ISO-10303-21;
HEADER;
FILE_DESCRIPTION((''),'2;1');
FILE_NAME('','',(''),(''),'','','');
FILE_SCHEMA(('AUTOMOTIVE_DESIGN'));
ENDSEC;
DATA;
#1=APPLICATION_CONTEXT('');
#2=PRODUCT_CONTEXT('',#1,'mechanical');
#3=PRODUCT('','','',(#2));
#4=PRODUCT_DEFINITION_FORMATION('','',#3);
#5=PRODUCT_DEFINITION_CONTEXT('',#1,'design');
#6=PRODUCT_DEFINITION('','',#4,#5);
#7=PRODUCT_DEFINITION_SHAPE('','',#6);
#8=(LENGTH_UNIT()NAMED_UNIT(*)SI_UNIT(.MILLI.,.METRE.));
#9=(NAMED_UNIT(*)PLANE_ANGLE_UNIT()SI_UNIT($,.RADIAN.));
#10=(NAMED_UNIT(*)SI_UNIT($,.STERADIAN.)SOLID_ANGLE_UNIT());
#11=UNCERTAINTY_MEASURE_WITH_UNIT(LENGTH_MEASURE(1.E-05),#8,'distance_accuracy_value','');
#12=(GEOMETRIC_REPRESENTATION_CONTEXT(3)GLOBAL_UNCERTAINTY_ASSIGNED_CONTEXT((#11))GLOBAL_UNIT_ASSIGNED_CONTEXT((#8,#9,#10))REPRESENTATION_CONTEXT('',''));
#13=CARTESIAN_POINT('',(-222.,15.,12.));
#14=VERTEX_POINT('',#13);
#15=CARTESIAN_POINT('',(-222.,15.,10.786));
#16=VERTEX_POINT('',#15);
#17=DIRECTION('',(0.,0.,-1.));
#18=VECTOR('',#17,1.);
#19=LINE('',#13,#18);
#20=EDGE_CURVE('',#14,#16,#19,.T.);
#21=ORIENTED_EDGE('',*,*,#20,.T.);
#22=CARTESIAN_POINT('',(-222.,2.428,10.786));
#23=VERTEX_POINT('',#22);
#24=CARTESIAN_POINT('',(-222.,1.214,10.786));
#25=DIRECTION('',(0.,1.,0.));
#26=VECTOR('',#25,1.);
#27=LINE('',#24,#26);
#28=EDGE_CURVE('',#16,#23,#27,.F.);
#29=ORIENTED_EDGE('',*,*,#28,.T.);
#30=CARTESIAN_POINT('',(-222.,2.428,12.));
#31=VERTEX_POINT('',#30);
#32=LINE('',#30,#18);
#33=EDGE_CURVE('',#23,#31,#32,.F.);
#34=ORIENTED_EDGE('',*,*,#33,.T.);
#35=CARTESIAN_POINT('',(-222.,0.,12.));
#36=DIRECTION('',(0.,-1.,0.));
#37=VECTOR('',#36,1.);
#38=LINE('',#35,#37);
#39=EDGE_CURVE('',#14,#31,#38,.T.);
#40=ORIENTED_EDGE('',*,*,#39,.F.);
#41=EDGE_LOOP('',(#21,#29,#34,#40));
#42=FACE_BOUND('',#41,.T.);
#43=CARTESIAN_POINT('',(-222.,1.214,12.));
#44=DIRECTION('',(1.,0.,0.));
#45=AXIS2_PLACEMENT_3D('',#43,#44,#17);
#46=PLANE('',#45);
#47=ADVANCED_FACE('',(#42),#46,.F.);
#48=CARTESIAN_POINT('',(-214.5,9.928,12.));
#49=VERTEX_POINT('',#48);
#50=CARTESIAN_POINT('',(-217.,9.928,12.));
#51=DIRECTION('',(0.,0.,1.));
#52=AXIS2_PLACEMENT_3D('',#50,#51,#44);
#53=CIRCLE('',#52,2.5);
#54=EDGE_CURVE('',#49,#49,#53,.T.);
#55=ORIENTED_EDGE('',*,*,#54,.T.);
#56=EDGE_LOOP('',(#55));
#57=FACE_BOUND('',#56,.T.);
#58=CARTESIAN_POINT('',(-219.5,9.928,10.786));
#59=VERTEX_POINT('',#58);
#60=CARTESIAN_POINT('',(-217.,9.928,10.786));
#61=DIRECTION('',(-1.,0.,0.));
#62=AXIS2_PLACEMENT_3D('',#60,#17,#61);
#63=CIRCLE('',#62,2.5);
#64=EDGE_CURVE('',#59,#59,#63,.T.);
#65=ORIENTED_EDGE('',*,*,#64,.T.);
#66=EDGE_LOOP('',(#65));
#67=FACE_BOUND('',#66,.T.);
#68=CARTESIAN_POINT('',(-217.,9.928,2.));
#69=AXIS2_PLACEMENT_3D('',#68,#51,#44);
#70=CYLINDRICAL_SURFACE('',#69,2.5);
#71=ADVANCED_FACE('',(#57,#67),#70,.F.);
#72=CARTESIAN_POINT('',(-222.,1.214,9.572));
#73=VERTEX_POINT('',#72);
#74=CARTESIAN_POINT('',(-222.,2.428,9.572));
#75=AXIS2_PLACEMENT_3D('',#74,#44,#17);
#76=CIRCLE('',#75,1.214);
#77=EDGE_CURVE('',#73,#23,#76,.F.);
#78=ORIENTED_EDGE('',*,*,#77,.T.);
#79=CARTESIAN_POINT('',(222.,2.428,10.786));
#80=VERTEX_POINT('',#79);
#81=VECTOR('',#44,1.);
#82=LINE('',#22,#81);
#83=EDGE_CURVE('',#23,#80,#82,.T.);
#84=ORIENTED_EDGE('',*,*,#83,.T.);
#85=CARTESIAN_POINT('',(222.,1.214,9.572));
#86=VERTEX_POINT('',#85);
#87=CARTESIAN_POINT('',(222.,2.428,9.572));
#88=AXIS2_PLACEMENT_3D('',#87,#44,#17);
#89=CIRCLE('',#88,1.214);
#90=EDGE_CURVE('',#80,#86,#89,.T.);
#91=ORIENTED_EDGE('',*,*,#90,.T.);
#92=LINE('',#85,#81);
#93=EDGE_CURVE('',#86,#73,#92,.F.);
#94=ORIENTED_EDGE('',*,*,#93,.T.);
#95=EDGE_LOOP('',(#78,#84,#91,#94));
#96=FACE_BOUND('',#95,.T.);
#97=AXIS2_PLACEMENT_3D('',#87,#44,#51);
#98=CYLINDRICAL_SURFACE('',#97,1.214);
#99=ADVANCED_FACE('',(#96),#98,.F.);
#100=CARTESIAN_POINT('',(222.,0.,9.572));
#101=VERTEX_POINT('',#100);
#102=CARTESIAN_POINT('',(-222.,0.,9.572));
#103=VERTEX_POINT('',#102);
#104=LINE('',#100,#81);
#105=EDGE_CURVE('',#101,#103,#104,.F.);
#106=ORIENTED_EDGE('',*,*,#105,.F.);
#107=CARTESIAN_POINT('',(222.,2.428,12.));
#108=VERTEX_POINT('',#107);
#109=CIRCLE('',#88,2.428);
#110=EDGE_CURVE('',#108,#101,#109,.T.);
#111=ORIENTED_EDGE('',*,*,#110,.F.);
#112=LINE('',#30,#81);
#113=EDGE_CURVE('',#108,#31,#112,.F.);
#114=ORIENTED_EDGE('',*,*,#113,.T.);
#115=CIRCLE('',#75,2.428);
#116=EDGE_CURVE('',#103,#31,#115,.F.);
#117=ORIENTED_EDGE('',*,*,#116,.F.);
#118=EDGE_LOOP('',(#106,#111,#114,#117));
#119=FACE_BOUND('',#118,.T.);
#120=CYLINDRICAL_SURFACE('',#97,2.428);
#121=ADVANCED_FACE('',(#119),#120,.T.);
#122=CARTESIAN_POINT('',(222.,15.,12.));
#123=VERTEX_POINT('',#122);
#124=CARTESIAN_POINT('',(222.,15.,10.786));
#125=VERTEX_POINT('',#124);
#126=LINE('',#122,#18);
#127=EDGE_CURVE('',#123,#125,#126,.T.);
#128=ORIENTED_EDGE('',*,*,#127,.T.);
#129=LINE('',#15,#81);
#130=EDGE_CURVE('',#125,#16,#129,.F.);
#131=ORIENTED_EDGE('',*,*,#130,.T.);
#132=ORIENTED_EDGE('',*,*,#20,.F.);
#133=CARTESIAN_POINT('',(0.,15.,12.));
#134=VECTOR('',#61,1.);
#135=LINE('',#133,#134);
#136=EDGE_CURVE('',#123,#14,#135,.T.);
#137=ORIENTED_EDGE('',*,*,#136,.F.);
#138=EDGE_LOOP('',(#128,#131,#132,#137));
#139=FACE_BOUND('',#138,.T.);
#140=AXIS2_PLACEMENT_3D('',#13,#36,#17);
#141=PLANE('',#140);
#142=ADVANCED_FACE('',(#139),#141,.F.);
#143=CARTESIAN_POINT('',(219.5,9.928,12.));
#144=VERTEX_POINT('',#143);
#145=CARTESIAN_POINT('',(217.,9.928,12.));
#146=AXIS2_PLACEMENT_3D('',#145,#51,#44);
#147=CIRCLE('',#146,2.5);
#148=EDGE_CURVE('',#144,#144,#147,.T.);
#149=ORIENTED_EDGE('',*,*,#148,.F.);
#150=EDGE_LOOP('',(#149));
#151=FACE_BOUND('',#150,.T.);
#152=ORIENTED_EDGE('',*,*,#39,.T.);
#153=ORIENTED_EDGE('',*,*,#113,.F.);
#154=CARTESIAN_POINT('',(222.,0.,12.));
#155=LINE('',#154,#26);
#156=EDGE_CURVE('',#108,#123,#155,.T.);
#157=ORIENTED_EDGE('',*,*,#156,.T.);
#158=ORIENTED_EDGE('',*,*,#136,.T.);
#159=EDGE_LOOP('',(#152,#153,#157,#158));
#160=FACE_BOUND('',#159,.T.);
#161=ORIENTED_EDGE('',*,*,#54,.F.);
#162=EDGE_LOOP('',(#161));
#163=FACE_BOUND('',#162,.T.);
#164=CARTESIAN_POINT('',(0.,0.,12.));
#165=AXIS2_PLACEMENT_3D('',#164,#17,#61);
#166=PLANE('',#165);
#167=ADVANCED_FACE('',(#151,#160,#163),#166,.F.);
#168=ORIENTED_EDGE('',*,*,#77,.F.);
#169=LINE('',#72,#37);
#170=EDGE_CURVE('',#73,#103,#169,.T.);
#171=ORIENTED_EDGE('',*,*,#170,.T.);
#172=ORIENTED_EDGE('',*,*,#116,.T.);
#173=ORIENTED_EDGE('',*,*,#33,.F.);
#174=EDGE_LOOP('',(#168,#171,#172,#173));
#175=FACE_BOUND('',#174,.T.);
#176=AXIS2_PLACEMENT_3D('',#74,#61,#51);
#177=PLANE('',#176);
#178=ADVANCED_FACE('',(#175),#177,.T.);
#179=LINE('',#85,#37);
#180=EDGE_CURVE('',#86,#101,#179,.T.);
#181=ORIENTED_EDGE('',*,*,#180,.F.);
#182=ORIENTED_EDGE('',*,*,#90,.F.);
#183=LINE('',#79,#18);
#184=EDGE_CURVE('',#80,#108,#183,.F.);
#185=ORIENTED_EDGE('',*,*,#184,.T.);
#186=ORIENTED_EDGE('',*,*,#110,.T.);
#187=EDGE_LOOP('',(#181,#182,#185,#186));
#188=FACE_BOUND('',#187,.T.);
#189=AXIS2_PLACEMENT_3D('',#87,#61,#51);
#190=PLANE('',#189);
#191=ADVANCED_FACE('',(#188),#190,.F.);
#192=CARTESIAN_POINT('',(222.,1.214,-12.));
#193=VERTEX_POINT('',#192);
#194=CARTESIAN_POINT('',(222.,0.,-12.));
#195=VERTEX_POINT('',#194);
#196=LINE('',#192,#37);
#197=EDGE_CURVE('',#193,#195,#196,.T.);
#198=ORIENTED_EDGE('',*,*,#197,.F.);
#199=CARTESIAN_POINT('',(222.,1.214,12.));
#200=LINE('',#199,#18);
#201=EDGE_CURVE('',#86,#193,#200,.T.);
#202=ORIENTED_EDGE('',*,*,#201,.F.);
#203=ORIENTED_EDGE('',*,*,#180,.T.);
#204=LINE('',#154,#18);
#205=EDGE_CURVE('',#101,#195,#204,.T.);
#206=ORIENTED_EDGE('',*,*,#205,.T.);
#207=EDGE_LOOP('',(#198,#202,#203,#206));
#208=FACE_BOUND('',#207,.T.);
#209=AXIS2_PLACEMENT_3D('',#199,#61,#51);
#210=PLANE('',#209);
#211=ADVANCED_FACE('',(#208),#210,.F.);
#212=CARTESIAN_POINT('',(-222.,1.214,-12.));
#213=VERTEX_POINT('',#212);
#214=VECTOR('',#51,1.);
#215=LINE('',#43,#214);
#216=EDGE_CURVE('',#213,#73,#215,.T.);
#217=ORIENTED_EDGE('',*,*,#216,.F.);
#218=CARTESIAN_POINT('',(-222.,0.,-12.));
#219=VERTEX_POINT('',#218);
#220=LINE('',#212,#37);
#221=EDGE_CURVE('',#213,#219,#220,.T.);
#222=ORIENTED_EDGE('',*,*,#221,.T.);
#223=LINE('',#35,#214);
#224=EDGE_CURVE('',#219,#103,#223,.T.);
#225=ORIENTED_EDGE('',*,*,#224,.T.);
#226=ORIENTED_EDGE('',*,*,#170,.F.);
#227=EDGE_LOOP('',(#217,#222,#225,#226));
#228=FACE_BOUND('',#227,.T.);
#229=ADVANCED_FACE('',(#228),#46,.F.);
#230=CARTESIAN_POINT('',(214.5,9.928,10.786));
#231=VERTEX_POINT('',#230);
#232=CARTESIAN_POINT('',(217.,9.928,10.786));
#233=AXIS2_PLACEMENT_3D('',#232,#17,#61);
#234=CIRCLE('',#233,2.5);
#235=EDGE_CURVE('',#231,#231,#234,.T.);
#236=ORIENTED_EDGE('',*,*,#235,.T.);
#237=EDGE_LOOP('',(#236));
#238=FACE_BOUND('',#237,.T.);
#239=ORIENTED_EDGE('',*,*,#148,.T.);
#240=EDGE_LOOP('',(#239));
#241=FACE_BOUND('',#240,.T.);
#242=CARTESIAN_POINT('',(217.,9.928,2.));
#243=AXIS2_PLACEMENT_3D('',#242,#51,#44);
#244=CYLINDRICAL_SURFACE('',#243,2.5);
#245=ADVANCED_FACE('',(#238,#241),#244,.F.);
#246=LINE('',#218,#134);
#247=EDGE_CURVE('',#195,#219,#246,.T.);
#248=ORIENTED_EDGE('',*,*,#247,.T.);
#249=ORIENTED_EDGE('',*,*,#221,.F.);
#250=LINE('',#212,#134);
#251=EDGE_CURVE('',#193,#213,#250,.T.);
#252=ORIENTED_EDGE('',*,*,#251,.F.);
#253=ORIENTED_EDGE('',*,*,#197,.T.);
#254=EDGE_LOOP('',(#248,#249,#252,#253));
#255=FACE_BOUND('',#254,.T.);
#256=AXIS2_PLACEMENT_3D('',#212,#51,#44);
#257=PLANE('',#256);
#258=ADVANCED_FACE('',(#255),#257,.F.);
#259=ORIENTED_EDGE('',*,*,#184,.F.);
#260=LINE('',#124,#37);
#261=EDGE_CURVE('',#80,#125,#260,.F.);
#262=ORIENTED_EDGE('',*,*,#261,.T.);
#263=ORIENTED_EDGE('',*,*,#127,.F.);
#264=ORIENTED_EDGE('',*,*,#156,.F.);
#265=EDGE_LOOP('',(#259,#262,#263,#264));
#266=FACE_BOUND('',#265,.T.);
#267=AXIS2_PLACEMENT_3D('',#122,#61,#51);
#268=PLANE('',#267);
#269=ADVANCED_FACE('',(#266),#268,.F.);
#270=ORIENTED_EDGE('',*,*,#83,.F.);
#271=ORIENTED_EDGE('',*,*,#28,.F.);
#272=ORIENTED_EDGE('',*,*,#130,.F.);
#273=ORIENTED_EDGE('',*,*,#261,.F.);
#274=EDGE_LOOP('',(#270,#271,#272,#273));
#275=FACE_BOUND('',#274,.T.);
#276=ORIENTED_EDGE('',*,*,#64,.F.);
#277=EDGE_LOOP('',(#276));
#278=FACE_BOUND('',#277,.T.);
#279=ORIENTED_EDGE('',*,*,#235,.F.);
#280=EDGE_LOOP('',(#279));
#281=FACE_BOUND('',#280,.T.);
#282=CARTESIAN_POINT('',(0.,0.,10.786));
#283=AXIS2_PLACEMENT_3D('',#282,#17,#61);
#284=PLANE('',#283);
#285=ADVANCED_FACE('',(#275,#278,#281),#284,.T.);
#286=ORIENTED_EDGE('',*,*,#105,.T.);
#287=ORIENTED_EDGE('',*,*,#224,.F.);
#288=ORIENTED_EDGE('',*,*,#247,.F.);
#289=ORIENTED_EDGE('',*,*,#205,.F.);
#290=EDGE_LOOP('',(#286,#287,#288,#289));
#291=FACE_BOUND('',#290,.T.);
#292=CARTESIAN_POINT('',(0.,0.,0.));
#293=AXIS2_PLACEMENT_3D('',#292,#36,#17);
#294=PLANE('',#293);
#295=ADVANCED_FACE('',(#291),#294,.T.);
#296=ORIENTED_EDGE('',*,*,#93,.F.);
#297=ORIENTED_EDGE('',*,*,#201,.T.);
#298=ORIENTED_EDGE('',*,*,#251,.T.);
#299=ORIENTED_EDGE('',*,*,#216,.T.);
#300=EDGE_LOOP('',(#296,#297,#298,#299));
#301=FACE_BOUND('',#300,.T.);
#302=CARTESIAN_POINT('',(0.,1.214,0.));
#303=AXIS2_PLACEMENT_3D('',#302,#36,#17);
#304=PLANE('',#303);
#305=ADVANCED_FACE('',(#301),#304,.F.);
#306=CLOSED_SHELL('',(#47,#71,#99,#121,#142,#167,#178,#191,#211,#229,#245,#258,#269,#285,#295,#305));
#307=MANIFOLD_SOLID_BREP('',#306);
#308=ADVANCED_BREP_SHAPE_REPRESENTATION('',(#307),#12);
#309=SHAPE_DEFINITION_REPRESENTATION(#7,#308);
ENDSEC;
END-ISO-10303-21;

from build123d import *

# Parameters (mm, degrees)
SKETCH1_W                    = 444
SKETCH1_H                    = 24
BASE_FLANGE1_DEPTH           = 1.214
EDGE_FLANGE1_STRIP_W         = 7.284
EDGE_FLANGE1_STRIP_H         = 1.214
EDGE_FLANGE1_STRIP_CUT_DEPTH = 444
EDGE_FLANGE1_DEPTH           = 444
SKETCH9_R                    = 2.5
CUT_EXTRUDE1_DEPTH           = 10


# Sheet-metal steps are written as plain solids
with BuildPart() as part:
    # Sketch1 → Base-Flange1 (new body)
    with BuildSketch(Plane(origin=(0, 0, 0), x_dir=(1, 0, 0), z_dir=(0, 1, 0))):
        Rectangle(SKETCH1_W, SKETCH1_H)
    extrude(amount=BASE_FLANGE1_DEPTH)

    # Edge-Flange1 strip (across the edge) → Edge-Flange1 strip cut (cut)
    with BuildSketch(Plane(origin=(-222, 1.214, 12), x_dir=(0, 0, -1), z_dir=(1, 0, 0))):
        with Locations((-1.214, -0.607)):
            Rectangle(EDGE_FLANGE1_STRIP_W, EDGE_FLANGE1_STRIP_H)
    extrude(amount=EDGE_FLANGE1_STRIP_CUT_DEPTH, mode=Mode.SUBTRACT)

    # Edge-Flange1 section (across the edge) → Edge-Flange1 (add)
    with BuildSketch(Plane(origin=(-222, 1.214, 12), x_dir=(0, 0, -1), z_dir=(1, 0, 0))):
        with BuildLine():
            Line((0, 1.214), (0, 13.786))
            Line((0, 13.786), (1.214, 13.786))
            Line((1.214, 13.786), (1.214, 1.214))
            ThreePointArc((1.214, 1.214), (1.569572368, 0.355572368), (2.428, 0))
            Line((2.428, 0), (2.428, -1.214))
            ThreePointArc((2.428, -1.214), (0.711144735, -0.502855265), (0, 1.214))
        make_face()
    extrude(amount=EDGE_FLANGE1_DEPTH)

    # Sketch9 → Cut-Extrude1 (cut)
    with BuildSketch(Plane.XY.offset(12)):
        with Locations((217, 9.928)):
            Circle(SKETCH9_R)
        with Locations((-217, 9.928)):
            Circle(SKETCH9_R)
    extrude(amount=-CUT_EXTRUDE1_DEPTH, mode=Mode.SUBTRACT)


solid = part.part
